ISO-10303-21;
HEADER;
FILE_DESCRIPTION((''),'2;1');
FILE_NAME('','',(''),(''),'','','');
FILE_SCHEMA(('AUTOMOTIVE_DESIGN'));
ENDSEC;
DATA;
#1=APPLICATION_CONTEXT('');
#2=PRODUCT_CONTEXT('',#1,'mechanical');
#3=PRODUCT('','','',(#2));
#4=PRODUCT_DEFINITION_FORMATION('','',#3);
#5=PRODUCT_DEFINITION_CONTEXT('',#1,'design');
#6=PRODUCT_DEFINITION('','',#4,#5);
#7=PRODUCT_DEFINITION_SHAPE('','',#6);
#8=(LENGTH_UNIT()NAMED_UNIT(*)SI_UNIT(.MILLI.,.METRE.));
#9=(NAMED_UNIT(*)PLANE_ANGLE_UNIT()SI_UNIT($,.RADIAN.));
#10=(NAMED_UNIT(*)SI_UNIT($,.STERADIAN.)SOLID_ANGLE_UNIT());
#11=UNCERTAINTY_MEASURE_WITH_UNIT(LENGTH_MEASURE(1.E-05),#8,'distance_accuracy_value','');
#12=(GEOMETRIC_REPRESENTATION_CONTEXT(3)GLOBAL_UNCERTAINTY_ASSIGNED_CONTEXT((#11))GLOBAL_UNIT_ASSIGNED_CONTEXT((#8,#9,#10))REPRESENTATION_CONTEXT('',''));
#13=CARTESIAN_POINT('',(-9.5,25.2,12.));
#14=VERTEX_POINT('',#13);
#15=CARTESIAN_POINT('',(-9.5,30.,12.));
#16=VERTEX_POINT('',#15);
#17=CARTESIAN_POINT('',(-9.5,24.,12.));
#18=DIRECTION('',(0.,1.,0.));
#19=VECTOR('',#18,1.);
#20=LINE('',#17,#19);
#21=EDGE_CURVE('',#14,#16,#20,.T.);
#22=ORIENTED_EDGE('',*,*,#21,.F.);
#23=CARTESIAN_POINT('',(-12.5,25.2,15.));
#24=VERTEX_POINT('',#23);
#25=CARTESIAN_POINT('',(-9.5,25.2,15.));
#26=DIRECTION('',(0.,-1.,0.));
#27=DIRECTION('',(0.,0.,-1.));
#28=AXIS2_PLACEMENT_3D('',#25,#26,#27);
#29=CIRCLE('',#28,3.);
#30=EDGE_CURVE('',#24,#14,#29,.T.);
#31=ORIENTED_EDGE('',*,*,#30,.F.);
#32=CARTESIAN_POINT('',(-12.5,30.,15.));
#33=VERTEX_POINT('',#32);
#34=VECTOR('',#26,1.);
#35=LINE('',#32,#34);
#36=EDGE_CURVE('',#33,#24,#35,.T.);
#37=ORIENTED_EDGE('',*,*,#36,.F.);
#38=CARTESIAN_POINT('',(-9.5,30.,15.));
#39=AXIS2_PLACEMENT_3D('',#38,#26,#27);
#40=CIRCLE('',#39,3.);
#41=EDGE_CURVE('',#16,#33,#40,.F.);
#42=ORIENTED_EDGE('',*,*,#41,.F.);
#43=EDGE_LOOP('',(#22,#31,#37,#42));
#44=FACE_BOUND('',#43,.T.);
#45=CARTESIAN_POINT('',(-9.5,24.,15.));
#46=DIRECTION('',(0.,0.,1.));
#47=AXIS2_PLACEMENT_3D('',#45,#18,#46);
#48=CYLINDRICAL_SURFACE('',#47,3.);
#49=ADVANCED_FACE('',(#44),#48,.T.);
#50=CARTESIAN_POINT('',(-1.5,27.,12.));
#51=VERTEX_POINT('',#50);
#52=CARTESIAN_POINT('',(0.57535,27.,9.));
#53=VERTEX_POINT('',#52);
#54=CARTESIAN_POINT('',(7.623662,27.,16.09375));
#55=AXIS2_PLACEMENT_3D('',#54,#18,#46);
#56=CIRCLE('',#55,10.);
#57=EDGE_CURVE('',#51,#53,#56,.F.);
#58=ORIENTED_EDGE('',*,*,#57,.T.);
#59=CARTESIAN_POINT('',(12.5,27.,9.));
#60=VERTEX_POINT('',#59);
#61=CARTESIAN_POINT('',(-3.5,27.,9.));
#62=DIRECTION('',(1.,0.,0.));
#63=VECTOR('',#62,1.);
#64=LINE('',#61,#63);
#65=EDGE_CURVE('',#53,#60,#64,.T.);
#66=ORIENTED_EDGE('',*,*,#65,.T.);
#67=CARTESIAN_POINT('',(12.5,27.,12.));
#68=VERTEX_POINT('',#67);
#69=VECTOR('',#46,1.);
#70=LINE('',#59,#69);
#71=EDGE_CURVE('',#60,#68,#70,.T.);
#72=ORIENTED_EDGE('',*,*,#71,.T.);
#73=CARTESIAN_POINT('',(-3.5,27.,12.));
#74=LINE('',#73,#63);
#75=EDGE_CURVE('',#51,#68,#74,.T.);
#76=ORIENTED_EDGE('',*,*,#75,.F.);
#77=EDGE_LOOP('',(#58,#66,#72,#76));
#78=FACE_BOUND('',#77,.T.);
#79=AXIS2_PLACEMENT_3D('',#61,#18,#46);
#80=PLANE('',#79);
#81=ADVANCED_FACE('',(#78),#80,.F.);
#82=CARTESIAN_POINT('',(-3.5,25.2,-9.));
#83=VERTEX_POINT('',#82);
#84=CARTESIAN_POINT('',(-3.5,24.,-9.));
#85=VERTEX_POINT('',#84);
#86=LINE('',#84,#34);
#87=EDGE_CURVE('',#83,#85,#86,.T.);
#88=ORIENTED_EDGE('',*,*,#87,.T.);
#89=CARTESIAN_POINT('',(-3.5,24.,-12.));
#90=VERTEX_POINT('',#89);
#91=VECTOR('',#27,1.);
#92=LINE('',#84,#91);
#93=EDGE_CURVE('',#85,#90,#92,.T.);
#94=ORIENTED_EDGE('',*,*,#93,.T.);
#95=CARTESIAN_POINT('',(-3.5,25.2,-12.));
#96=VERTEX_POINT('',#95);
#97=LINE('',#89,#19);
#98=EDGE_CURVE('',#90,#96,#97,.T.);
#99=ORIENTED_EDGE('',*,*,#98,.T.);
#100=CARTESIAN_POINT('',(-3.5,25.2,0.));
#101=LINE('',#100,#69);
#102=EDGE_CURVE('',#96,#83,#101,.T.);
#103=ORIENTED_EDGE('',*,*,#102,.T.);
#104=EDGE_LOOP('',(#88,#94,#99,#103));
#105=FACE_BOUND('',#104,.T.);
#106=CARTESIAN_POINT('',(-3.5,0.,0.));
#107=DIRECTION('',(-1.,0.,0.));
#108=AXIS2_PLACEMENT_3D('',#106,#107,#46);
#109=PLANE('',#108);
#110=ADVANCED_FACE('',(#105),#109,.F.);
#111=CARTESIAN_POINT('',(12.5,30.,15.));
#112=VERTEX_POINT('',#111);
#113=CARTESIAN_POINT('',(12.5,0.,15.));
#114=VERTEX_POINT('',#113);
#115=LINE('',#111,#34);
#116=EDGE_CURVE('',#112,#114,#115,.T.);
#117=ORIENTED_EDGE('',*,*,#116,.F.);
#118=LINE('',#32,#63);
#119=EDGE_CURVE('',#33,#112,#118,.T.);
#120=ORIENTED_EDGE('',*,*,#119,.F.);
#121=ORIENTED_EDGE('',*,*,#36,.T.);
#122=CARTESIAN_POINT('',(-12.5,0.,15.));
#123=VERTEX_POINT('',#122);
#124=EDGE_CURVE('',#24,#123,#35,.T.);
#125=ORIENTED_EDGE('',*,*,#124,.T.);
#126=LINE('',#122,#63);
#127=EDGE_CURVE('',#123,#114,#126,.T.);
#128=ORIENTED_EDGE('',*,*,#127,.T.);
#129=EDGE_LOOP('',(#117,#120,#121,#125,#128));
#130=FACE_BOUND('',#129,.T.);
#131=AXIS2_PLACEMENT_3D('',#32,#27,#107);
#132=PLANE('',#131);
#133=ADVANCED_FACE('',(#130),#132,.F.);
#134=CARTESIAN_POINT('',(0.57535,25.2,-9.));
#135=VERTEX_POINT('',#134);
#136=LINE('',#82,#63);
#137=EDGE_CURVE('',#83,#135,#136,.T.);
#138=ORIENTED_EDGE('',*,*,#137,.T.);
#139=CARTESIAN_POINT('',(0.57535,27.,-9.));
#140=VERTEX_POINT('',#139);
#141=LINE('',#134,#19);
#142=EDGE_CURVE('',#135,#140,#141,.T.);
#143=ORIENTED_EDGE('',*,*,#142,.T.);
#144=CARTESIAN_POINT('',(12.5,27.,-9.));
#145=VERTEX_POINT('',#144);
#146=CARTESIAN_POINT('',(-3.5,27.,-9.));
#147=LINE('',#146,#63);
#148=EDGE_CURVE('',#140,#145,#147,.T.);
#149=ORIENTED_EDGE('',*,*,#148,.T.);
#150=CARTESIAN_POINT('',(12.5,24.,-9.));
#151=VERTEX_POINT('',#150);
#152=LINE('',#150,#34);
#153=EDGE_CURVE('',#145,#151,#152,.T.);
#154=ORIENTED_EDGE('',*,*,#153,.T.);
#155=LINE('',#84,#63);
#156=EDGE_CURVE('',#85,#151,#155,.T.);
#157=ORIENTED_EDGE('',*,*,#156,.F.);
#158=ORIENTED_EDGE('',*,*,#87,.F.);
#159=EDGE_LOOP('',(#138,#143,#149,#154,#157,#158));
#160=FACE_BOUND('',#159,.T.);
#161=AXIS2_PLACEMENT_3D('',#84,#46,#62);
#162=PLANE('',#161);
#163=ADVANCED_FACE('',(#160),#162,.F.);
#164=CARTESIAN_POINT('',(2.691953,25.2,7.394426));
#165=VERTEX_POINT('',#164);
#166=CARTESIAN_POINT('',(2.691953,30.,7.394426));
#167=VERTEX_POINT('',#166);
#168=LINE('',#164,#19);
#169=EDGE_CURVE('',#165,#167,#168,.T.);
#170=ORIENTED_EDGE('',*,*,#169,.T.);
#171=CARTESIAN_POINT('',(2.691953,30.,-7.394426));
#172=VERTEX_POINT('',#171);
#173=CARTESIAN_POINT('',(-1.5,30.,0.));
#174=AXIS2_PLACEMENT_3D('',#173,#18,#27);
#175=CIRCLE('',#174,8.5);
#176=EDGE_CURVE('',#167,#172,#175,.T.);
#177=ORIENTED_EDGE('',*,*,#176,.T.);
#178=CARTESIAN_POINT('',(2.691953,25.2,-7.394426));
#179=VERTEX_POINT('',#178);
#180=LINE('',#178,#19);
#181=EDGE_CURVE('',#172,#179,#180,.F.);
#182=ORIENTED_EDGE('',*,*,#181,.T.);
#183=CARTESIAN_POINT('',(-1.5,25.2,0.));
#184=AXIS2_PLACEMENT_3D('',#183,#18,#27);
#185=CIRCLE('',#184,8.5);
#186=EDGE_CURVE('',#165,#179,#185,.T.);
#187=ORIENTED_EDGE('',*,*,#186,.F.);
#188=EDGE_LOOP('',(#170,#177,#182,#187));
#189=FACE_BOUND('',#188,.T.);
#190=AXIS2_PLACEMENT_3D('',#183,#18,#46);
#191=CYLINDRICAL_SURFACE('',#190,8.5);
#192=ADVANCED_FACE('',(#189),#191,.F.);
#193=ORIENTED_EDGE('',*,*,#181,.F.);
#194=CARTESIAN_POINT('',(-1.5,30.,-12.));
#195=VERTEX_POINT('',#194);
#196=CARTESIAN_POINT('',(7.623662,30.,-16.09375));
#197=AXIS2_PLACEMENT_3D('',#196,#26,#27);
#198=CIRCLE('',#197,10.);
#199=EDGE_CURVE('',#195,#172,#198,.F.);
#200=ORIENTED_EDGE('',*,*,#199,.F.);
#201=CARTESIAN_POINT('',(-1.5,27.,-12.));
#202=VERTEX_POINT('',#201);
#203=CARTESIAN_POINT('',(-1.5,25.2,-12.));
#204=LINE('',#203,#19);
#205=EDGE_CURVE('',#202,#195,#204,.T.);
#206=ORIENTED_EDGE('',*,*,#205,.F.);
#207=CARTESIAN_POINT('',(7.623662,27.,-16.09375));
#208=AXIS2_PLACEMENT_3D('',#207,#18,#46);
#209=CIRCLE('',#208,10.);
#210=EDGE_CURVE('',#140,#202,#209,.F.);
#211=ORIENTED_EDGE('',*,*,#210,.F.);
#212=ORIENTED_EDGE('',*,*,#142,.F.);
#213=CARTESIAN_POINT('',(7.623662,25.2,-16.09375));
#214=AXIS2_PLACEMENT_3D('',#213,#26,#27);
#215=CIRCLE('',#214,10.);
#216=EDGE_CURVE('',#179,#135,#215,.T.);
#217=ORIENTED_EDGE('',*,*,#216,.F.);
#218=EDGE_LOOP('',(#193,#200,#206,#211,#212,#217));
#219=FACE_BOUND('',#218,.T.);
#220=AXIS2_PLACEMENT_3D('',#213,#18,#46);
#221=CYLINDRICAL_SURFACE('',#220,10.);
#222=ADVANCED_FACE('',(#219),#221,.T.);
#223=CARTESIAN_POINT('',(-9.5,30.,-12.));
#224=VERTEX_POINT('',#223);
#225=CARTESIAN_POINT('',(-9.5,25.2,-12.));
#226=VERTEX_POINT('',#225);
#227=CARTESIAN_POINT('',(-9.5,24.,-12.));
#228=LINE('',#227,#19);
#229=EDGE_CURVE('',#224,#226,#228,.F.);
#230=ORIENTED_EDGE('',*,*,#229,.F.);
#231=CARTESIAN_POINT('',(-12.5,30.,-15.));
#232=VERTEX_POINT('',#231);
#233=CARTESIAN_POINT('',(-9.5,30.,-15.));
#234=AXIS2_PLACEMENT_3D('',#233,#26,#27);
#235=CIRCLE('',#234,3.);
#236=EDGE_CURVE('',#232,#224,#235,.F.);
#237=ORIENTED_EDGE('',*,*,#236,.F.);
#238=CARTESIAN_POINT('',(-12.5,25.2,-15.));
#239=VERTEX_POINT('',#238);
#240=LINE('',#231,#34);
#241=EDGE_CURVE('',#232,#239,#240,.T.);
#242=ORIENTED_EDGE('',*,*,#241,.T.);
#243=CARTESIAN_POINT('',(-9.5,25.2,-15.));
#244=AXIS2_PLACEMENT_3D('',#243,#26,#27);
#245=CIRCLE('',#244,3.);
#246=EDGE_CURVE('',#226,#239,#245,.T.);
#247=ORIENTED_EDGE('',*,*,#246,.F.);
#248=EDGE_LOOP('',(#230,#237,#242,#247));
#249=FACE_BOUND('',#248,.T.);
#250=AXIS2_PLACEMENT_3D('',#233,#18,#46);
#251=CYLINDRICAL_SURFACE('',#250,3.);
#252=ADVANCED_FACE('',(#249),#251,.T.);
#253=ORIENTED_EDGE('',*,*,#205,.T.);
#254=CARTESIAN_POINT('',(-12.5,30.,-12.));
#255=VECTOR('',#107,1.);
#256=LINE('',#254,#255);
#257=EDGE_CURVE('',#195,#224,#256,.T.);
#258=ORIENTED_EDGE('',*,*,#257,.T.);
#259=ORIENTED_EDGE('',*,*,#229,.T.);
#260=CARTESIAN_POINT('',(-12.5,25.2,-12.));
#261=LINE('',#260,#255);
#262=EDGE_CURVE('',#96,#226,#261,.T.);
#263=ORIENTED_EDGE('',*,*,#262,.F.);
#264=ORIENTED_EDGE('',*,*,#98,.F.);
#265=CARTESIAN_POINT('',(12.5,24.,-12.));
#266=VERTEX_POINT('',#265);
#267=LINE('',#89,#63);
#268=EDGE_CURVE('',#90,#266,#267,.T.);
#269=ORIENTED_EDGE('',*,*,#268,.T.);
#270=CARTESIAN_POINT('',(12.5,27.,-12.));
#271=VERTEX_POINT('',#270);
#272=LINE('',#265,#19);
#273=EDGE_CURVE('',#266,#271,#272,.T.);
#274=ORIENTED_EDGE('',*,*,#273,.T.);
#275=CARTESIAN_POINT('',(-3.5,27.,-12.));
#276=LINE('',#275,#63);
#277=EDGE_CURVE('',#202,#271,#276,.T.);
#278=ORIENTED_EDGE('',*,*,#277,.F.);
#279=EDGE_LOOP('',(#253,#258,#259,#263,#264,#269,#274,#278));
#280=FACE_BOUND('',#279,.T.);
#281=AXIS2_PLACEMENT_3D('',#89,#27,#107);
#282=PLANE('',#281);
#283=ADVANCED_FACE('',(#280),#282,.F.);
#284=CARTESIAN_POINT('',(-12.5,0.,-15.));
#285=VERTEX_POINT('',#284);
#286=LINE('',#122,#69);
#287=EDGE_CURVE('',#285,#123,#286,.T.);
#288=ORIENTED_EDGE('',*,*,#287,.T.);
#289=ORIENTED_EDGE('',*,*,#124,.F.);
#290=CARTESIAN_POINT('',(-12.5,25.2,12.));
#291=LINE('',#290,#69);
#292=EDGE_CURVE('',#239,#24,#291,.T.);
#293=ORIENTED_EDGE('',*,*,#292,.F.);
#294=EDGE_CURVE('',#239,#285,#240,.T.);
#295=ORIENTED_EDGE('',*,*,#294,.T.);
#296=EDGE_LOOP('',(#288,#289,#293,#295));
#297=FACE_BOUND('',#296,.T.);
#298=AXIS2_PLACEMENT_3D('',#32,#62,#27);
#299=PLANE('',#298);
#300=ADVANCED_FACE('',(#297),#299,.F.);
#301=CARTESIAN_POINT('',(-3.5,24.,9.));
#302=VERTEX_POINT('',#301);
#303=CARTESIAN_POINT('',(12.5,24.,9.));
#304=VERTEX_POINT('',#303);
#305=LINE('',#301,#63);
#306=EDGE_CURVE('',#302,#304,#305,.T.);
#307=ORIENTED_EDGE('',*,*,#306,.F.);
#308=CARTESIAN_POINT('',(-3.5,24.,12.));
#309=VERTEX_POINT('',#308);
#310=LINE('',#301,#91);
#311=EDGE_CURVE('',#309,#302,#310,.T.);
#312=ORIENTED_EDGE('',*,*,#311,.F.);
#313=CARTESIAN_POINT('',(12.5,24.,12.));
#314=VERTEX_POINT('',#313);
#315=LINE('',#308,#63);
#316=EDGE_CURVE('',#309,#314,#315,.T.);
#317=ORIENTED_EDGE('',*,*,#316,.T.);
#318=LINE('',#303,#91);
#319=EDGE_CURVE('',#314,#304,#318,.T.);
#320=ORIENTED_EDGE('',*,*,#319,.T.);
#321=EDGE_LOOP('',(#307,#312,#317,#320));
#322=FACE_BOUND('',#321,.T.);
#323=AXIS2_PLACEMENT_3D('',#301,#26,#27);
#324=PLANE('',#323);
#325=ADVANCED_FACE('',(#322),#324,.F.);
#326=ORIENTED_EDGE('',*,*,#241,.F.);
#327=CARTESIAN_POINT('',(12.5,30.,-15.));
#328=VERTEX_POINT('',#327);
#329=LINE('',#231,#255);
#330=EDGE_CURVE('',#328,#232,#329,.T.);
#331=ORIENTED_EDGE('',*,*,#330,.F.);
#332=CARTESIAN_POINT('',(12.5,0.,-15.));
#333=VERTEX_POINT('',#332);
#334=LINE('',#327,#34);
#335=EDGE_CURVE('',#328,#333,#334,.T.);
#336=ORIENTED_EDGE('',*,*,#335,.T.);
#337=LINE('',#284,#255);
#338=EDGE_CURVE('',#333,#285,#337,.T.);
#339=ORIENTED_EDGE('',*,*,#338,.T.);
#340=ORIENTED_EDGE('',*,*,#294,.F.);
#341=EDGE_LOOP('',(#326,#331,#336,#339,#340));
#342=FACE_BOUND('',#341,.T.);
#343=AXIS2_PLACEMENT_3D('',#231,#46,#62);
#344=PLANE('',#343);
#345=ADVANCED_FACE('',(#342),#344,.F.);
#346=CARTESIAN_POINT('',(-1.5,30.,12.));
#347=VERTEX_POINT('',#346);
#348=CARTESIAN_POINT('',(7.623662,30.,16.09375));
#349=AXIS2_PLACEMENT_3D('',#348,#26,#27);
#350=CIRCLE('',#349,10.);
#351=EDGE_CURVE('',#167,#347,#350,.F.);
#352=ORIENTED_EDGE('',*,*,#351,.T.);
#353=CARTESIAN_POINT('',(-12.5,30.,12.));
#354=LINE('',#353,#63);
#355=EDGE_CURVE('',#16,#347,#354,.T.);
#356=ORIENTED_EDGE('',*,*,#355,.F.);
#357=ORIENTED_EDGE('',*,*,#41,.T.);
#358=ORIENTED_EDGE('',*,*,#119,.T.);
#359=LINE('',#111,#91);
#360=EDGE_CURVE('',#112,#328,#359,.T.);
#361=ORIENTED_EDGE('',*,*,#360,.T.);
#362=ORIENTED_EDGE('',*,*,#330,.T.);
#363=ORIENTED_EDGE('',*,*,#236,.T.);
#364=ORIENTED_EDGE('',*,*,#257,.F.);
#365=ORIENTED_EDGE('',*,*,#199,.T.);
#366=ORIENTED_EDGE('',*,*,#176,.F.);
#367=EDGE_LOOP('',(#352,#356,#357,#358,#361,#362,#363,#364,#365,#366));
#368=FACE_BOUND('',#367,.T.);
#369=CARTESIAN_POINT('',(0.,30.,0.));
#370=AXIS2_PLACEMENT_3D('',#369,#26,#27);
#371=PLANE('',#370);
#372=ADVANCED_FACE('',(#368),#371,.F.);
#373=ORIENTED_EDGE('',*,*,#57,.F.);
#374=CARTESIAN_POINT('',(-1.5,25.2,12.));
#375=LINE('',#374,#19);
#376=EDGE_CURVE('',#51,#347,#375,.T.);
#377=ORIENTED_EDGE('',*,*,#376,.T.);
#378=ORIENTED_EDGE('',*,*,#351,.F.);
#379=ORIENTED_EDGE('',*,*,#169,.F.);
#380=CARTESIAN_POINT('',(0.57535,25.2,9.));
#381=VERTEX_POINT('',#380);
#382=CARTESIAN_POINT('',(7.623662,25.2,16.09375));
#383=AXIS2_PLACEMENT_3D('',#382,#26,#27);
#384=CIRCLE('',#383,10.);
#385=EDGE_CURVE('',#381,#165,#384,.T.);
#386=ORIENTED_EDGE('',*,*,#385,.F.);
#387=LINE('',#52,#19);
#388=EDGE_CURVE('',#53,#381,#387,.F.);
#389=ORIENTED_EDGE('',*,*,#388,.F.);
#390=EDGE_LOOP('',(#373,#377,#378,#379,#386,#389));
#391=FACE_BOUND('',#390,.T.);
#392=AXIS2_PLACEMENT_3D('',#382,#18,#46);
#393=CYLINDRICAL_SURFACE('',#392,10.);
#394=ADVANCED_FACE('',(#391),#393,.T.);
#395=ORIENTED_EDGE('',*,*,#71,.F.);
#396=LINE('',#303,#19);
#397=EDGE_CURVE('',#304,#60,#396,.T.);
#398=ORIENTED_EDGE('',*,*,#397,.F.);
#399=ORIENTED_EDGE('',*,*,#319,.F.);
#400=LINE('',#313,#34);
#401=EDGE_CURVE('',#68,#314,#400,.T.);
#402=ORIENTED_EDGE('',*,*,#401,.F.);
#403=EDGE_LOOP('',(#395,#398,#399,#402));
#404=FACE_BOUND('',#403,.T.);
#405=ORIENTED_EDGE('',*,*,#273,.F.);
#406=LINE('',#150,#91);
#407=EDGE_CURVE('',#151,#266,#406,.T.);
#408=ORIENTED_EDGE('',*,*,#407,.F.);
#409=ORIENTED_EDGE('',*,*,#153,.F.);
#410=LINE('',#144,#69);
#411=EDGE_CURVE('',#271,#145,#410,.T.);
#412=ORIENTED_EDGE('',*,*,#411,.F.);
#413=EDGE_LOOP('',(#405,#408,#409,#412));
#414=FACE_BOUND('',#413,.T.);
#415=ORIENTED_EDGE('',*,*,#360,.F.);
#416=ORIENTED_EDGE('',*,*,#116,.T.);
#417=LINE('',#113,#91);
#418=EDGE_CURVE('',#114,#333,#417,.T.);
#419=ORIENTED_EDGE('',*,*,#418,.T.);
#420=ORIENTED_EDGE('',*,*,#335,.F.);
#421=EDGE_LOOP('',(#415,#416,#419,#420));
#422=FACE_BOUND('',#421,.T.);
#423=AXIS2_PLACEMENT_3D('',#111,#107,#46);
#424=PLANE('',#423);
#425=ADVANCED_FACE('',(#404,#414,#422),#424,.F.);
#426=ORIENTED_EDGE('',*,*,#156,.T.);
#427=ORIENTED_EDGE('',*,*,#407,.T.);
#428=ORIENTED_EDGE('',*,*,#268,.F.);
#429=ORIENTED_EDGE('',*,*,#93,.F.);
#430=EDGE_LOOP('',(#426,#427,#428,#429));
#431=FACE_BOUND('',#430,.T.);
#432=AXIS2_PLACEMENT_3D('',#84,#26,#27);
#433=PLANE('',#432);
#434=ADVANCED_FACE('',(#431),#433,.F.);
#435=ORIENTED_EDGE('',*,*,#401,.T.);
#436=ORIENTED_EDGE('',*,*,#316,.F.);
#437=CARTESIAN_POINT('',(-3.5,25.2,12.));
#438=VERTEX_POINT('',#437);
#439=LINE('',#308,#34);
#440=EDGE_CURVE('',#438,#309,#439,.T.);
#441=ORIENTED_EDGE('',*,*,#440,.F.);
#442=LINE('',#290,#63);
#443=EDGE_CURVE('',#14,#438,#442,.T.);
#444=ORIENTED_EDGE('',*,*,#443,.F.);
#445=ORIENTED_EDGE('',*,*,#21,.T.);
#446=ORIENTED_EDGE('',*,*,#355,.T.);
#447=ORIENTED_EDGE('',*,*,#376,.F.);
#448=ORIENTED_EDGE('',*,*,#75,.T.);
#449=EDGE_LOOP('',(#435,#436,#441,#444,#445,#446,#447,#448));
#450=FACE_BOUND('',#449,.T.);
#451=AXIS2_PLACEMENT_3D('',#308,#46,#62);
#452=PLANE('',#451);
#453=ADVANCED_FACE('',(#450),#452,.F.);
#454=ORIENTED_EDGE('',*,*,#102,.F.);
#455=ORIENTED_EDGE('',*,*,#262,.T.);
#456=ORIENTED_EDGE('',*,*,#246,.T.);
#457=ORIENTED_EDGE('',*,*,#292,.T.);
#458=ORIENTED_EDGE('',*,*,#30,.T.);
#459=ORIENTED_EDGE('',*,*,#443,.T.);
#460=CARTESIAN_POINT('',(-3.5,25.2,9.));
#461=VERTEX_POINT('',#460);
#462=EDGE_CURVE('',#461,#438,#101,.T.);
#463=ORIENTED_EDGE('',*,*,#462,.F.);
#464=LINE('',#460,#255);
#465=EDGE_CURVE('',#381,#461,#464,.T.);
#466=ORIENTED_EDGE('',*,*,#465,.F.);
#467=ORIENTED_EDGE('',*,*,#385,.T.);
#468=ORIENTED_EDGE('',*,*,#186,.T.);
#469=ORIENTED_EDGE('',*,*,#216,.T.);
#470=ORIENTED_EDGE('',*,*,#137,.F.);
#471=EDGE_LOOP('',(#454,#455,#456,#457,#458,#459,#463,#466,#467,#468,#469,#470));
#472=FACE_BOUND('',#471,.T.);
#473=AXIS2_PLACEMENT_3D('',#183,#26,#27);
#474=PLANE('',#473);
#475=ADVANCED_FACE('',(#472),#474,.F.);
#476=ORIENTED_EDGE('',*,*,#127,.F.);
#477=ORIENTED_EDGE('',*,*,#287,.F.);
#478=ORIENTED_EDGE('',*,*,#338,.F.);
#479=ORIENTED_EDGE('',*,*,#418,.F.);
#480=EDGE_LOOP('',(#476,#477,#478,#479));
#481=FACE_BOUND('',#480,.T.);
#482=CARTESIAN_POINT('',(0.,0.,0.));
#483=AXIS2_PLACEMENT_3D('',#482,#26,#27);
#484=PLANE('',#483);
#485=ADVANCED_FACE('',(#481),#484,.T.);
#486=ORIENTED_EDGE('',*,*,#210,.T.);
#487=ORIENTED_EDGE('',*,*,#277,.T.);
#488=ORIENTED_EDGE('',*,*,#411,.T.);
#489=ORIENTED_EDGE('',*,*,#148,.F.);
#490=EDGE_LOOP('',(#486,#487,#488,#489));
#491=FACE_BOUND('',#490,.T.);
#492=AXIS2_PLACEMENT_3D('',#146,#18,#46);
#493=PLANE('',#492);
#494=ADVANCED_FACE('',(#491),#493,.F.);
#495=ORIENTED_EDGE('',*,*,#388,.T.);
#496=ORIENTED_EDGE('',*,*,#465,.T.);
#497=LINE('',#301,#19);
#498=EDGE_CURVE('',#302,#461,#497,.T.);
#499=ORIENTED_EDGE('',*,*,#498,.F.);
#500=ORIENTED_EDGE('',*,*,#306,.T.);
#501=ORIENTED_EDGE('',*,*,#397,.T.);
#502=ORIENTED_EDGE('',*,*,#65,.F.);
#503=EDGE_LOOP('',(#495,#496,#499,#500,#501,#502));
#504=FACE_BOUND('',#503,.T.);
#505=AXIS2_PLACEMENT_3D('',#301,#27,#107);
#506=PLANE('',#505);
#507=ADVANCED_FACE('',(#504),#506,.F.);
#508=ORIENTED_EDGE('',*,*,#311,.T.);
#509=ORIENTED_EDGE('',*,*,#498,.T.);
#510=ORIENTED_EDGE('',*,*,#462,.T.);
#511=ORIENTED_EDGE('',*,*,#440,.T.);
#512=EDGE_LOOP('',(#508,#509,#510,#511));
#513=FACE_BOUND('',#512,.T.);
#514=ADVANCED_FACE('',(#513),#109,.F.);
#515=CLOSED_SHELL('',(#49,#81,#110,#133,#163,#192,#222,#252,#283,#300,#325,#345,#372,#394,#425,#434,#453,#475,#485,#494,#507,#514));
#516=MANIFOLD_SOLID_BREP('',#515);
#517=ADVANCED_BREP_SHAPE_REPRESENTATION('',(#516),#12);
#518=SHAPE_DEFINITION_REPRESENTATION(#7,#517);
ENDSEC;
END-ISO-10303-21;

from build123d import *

# Parameters (mm, degrees)
SKETCH1_W           = 25
SKETCH1_H           = 30
BOSS_EXTRUDE1_DEPTH = 30
SKETCH3_W           = 3
SKETCH3_H           = 3
CUT_EXTRUDE1_DEPTH  = 16
CUT_EXTRUDE2_DEPTH  = 4.8
FILLET1_R           = 10
FILLET2_R           = 3


# Some blends are built 0.0001 mm under size
with BuildPart() as part:
    # Sketch1 → Boss-Extrude1 (new body)
    with BuildSketch(Plane(origin=(0, 0, 0), x_dir=(1, 0, 0), z_dir=(0, 1, 0))):
        Rectangle(SKETCH1_W, SKETCH1_H)
    extrude(amount=BOSS_EXTRUDE1_DEPTH)

    # Sketch3 → Cut-Extrude1 (cut)
    with BuildSketch(Plane(origin=(12.5, 0, 0), x_dir=(0, 0, -1), z_dir=(1, 0, 0))):
        with Locations((10.5, 25.5)):
            Rectangle(SKETCH3_W, SKETCH3_H)
        with Locations((-10.5, 25.5)):
            Rectangle(SKETCH3_W, SKETCH3_H)
    extrude(amount=-CUT_EXTRUDE1_DEPTH, mode=Mode.SUBTRACT)

    # Sketch5 → Cut-Extrude2 (cut)
    with BuildSketch(Plane(origin=(0, 30, 0), x_dir=(1, 0, 0), z_dir=(0, 1, 0))):
        with BuildLine():
            Line((-12.5, -12), (-1.5, -12))
            Line((-1.5, -12), (-1.5, -8.5))
            ThreePointArc((-1.5, -8.5), (7, 0), (-1.5, 8.5))
            Line((-1.5, 8.5), (-1.5, 12))
            Line((-1.5, 12), (-12.5, 12))
            Line((-12.5, 12), (-12.5, -12))
        make_face()
    extrude(amount=-CUT_EXTRUDE2_DEPTH, mode=Mode.SUBTRACT)

    # Fillet1
    # the kernel refuses this fillet: 10 mm, written as the material it takes off along each edge
    with BuildSketch(Plane(origin=(-1.5, 40.838231957, 8.5), x_dir=(0, 0, 1), z_dir=(0, -1, 0))) as fillet1_piece_1:
        with BuildLine():
            CenterArc((7.59375, -9.123662145), FILLET1_R, 114.165579325, 36.285209338)
            Line((-1.105574324, -4.191952877), (-1.279560811, -4.093318692))
            ThreePointArc((-1.279560811, -4.093318692), (-0.474426959, -2.116642947), (-0.2, 0))
            Line((-0.2, 0), (0, 0.2))
            ThreePointArc((0, 0.2), (1.75, 0.2), (3.418125, 0.182473243))
            Line((3.418125, 0.182473243), (3.5, 0))
        make_face()
    extrude(amount=15.638231957, mode=Mode.SUBTRACT)
    with BuildSketch(Plane(origin=(-1.5, 40.838231957, -8.5), x_dir=(0.9669365109541641, 0, 0.2550172225238677), z_dir=(0, -1, 0))) as fillet1_piece_2:
        with BuildLine():
            CenterArc((6.885465008, -9.66936511), FILLET1_R, 104.774605668, 36.285209338)
            Line((-0.892560279, -3.384277788), (-1.048120785, -3.258576042))
            ThreePointArc((-1.048120785, -3.258576042), (-0.639667442, -1.64113545), (-0.193387302, 0.051003445))
            Line((-0.193387302, 0.051003445), (0.051003445, 0.193387302))
            ThreePointArc((0.051003445, 0.193387302), (2.167646391, -0.081039657), (4.284289338, 0.193387302))
            Line((4.284289338, 0.193387302), (4.335292783, 0))
        make_face()
    extrude(amount=15.638231957, mode=Mode.SUBTRACT)

    # Fillet2
    fillet2_edges = [part.edges().sort_by_distance(p)[0] for p in [
        (-12.5, 27.6, 12),
        (-12.5, 27.6, -12),
    ]]
    fillet(fillet2_edges, radius=FILLET2_R - 0.0001)  # a hair under: the kernel refuses the full size


solid = part.part
